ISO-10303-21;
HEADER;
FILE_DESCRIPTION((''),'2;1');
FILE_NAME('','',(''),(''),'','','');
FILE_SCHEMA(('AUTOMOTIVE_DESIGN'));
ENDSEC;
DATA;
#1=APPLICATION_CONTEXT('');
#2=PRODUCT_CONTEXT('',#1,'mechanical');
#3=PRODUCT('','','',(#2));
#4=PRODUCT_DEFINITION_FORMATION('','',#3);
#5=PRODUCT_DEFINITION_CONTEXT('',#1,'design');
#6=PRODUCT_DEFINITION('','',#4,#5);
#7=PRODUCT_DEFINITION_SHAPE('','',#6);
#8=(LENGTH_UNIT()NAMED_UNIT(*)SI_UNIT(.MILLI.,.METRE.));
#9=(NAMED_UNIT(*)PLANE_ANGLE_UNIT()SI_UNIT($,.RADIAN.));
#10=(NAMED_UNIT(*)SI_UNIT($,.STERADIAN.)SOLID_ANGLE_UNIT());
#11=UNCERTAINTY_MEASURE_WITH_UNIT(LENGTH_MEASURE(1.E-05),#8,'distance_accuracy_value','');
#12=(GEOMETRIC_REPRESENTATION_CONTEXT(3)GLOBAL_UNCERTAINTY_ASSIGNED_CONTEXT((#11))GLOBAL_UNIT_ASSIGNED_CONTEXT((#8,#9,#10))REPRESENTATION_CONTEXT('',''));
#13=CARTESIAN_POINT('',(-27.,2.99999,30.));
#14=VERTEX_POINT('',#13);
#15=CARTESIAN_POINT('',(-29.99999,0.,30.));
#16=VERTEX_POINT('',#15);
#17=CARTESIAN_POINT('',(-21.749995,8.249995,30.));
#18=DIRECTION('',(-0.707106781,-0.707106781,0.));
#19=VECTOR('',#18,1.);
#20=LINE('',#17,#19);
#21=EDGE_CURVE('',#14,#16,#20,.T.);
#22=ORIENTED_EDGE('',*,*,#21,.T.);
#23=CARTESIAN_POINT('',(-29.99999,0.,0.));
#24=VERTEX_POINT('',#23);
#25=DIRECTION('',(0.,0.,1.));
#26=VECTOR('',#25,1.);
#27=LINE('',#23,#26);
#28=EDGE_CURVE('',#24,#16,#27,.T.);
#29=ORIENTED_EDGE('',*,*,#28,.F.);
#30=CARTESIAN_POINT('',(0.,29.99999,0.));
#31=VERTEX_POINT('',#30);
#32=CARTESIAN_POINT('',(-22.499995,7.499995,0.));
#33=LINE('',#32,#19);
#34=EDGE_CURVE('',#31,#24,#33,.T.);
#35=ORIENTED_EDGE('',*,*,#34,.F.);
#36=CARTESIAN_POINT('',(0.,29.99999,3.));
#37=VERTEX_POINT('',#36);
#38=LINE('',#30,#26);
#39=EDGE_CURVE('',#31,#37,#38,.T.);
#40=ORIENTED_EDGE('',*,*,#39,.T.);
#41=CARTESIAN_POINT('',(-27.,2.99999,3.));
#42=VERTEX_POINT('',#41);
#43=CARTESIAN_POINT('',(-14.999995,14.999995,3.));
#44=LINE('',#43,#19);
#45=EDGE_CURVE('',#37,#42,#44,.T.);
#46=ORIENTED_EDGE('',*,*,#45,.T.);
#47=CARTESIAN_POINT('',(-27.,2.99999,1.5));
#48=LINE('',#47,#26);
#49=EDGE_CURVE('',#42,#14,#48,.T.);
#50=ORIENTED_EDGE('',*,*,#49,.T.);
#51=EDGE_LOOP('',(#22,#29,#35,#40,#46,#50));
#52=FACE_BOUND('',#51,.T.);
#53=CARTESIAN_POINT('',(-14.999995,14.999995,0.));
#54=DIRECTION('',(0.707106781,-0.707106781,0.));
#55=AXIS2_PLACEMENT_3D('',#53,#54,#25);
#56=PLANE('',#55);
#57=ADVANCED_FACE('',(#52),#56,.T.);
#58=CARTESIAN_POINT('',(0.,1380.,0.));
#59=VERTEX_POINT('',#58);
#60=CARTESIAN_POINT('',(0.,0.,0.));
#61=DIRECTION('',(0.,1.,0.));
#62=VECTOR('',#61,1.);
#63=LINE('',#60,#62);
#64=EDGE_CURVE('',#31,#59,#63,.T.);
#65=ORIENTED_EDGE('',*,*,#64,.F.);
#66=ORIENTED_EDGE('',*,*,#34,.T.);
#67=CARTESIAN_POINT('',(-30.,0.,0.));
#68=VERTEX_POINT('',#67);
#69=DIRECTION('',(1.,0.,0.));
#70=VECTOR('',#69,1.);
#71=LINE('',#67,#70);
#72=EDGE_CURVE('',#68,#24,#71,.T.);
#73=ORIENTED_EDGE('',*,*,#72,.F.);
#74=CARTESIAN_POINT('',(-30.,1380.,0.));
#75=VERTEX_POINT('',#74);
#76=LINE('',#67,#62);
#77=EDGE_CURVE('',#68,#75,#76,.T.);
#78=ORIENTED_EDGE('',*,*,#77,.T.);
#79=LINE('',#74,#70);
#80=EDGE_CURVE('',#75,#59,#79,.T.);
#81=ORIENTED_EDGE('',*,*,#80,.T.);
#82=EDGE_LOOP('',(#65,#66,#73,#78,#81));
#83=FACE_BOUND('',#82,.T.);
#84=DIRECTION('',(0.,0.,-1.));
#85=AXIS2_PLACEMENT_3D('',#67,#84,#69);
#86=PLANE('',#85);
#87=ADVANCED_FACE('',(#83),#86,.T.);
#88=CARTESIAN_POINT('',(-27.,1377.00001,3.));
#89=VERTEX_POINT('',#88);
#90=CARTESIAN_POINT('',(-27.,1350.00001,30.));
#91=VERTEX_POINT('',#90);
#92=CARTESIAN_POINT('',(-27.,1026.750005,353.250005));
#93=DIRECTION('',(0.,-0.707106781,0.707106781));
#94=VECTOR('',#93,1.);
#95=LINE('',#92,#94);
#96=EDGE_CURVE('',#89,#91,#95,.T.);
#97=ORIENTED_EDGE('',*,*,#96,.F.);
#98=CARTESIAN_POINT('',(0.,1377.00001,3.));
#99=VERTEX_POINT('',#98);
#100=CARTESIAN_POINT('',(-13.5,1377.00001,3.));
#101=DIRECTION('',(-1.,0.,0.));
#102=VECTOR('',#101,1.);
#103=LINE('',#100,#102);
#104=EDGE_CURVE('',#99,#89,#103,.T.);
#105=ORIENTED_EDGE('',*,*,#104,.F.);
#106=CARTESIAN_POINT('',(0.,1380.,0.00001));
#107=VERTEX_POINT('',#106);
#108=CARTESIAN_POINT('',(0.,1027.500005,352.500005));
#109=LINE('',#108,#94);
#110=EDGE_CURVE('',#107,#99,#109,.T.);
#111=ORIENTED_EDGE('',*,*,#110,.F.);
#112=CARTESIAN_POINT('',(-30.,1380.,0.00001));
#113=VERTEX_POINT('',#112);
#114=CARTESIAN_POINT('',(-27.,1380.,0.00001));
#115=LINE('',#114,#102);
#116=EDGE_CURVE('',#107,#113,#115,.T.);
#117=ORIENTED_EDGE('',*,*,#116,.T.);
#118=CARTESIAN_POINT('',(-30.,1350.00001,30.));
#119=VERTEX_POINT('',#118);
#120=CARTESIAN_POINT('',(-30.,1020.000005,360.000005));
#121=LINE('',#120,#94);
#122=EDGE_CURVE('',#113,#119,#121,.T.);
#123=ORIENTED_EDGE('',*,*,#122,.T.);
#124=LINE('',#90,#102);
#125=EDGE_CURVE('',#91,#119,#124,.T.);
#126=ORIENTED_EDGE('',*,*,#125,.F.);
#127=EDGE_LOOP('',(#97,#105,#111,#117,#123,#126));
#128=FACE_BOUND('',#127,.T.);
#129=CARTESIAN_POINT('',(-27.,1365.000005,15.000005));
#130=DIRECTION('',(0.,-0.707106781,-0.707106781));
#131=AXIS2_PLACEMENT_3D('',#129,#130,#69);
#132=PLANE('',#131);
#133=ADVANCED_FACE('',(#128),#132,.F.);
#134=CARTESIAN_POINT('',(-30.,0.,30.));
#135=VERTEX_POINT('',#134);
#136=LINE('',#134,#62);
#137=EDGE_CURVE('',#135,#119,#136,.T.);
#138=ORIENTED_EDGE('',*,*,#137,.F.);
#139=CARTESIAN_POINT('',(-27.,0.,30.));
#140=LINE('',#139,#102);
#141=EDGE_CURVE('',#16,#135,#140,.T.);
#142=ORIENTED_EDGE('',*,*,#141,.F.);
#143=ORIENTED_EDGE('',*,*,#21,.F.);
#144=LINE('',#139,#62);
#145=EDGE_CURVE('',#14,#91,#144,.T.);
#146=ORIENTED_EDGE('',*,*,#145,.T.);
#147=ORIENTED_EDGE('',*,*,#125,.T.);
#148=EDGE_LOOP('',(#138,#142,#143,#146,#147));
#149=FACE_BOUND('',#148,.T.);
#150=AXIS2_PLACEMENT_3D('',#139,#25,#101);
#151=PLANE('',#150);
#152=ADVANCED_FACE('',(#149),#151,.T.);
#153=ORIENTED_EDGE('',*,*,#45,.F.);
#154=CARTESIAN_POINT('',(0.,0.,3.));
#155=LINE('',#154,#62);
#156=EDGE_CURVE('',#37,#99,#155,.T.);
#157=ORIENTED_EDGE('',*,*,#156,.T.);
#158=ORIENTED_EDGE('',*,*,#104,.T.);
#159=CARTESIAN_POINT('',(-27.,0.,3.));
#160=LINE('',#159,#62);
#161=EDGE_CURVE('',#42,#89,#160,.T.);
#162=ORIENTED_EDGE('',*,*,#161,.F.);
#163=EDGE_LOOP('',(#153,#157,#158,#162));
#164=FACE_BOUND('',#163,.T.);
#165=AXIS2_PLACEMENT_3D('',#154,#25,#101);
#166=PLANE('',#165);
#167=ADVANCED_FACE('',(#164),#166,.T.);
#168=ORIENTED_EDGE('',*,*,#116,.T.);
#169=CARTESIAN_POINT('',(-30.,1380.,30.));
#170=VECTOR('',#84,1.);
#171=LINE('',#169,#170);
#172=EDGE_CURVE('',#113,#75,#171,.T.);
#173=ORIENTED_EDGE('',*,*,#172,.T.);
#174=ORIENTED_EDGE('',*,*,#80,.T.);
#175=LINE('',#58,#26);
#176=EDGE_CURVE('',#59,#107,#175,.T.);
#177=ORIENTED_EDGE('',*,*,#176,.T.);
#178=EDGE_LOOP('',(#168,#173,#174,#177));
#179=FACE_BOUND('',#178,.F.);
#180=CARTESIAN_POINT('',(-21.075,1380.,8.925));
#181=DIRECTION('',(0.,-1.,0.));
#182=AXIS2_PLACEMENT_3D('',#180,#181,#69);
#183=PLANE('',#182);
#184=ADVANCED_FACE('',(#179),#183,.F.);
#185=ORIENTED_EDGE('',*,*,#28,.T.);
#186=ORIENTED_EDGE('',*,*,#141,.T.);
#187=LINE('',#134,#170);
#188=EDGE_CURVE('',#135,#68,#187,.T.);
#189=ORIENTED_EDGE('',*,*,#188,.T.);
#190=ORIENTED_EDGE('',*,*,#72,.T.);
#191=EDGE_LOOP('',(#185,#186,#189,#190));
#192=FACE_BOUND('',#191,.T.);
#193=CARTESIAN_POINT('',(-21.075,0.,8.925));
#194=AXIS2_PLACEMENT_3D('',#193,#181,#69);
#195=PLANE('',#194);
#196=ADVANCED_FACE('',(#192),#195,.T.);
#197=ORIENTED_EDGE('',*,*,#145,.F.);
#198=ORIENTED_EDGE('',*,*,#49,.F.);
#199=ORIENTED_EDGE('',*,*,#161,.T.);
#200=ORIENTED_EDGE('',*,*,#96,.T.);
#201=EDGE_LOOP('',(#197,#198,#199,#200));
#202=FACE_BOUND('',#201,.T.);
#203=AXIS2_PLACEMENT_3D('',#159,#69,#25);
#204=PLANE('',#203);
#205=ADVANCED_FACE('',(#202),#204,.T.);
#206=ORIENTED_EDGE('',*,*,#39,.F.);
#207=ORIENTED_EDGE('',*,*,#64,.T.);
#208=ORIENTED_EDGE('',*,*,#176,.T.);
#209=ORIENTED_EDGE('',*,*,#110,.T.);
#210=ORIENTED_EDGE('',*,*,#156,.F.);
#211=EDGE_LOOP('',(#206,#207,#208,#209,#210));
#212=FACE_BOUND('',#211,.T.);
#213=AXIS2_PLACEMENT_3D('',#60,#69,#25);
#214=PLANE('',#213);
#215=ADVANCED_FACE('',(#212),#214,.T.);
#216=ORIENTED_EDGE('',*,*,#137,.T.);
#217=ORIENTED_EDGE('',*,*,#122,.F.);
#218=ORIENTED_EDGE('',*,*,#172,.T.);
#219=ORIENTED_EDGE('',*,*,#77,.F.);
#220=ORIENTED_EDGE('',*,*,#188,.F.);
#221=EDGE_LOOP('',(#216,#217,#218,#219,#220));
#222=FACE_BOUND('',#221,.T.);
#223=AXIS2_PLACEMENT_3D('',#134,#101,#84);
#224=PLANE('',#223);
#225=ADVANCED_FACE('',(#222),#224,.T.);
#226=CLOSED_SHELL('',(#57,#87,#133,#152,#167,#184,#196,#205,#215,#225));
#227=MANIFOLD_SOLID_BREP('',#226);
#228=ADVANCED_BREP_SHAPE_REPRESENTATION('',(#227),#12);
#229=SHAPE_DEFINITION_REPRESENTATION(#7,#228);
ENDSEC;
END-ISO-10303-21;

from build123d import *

# Parameters (mm, degrees)
F1_DEPTH = 1380
F2_SIZE  = 29.99999
F3_SIZE  = 29.99999


# Not quite as in the source:
# - a fillet or chamfer is up to 0.001 mm smaller than in the source, because OpenCascade refuses the exact size


with BuildPart() as f1:
    # F0 (on Front) → F1 (new body)
    with BuildSketch(Plane.XZ):
        Polygon((-30, 0), (0, 0), (0, 3), (-27, 3), (-27, 30), (-30, 30), align=None)
    extrude(amount=-F1_DEPTH)

    # F2 (size 30 in the source; OpenCascade refuses exactly that, so slightly less here)
    f2_edges = [f1.edges().sort_by_distance(p)[0] for p in [
        (0, 0, 1.5),
    ]]
    chamfer(f2_edges, length=F2_SIZE)

    # F3 (size 30 in the source; OpenCascade refuses exactly that, so slightly less here)
    f3_edges = [f1.edges().sort_by_distance(p)[0] for p in [
        (-28.5, 1380, 30),
    ]]
    chamfer(f3_edges, length=F3_SIZE)


solid = f1.part
